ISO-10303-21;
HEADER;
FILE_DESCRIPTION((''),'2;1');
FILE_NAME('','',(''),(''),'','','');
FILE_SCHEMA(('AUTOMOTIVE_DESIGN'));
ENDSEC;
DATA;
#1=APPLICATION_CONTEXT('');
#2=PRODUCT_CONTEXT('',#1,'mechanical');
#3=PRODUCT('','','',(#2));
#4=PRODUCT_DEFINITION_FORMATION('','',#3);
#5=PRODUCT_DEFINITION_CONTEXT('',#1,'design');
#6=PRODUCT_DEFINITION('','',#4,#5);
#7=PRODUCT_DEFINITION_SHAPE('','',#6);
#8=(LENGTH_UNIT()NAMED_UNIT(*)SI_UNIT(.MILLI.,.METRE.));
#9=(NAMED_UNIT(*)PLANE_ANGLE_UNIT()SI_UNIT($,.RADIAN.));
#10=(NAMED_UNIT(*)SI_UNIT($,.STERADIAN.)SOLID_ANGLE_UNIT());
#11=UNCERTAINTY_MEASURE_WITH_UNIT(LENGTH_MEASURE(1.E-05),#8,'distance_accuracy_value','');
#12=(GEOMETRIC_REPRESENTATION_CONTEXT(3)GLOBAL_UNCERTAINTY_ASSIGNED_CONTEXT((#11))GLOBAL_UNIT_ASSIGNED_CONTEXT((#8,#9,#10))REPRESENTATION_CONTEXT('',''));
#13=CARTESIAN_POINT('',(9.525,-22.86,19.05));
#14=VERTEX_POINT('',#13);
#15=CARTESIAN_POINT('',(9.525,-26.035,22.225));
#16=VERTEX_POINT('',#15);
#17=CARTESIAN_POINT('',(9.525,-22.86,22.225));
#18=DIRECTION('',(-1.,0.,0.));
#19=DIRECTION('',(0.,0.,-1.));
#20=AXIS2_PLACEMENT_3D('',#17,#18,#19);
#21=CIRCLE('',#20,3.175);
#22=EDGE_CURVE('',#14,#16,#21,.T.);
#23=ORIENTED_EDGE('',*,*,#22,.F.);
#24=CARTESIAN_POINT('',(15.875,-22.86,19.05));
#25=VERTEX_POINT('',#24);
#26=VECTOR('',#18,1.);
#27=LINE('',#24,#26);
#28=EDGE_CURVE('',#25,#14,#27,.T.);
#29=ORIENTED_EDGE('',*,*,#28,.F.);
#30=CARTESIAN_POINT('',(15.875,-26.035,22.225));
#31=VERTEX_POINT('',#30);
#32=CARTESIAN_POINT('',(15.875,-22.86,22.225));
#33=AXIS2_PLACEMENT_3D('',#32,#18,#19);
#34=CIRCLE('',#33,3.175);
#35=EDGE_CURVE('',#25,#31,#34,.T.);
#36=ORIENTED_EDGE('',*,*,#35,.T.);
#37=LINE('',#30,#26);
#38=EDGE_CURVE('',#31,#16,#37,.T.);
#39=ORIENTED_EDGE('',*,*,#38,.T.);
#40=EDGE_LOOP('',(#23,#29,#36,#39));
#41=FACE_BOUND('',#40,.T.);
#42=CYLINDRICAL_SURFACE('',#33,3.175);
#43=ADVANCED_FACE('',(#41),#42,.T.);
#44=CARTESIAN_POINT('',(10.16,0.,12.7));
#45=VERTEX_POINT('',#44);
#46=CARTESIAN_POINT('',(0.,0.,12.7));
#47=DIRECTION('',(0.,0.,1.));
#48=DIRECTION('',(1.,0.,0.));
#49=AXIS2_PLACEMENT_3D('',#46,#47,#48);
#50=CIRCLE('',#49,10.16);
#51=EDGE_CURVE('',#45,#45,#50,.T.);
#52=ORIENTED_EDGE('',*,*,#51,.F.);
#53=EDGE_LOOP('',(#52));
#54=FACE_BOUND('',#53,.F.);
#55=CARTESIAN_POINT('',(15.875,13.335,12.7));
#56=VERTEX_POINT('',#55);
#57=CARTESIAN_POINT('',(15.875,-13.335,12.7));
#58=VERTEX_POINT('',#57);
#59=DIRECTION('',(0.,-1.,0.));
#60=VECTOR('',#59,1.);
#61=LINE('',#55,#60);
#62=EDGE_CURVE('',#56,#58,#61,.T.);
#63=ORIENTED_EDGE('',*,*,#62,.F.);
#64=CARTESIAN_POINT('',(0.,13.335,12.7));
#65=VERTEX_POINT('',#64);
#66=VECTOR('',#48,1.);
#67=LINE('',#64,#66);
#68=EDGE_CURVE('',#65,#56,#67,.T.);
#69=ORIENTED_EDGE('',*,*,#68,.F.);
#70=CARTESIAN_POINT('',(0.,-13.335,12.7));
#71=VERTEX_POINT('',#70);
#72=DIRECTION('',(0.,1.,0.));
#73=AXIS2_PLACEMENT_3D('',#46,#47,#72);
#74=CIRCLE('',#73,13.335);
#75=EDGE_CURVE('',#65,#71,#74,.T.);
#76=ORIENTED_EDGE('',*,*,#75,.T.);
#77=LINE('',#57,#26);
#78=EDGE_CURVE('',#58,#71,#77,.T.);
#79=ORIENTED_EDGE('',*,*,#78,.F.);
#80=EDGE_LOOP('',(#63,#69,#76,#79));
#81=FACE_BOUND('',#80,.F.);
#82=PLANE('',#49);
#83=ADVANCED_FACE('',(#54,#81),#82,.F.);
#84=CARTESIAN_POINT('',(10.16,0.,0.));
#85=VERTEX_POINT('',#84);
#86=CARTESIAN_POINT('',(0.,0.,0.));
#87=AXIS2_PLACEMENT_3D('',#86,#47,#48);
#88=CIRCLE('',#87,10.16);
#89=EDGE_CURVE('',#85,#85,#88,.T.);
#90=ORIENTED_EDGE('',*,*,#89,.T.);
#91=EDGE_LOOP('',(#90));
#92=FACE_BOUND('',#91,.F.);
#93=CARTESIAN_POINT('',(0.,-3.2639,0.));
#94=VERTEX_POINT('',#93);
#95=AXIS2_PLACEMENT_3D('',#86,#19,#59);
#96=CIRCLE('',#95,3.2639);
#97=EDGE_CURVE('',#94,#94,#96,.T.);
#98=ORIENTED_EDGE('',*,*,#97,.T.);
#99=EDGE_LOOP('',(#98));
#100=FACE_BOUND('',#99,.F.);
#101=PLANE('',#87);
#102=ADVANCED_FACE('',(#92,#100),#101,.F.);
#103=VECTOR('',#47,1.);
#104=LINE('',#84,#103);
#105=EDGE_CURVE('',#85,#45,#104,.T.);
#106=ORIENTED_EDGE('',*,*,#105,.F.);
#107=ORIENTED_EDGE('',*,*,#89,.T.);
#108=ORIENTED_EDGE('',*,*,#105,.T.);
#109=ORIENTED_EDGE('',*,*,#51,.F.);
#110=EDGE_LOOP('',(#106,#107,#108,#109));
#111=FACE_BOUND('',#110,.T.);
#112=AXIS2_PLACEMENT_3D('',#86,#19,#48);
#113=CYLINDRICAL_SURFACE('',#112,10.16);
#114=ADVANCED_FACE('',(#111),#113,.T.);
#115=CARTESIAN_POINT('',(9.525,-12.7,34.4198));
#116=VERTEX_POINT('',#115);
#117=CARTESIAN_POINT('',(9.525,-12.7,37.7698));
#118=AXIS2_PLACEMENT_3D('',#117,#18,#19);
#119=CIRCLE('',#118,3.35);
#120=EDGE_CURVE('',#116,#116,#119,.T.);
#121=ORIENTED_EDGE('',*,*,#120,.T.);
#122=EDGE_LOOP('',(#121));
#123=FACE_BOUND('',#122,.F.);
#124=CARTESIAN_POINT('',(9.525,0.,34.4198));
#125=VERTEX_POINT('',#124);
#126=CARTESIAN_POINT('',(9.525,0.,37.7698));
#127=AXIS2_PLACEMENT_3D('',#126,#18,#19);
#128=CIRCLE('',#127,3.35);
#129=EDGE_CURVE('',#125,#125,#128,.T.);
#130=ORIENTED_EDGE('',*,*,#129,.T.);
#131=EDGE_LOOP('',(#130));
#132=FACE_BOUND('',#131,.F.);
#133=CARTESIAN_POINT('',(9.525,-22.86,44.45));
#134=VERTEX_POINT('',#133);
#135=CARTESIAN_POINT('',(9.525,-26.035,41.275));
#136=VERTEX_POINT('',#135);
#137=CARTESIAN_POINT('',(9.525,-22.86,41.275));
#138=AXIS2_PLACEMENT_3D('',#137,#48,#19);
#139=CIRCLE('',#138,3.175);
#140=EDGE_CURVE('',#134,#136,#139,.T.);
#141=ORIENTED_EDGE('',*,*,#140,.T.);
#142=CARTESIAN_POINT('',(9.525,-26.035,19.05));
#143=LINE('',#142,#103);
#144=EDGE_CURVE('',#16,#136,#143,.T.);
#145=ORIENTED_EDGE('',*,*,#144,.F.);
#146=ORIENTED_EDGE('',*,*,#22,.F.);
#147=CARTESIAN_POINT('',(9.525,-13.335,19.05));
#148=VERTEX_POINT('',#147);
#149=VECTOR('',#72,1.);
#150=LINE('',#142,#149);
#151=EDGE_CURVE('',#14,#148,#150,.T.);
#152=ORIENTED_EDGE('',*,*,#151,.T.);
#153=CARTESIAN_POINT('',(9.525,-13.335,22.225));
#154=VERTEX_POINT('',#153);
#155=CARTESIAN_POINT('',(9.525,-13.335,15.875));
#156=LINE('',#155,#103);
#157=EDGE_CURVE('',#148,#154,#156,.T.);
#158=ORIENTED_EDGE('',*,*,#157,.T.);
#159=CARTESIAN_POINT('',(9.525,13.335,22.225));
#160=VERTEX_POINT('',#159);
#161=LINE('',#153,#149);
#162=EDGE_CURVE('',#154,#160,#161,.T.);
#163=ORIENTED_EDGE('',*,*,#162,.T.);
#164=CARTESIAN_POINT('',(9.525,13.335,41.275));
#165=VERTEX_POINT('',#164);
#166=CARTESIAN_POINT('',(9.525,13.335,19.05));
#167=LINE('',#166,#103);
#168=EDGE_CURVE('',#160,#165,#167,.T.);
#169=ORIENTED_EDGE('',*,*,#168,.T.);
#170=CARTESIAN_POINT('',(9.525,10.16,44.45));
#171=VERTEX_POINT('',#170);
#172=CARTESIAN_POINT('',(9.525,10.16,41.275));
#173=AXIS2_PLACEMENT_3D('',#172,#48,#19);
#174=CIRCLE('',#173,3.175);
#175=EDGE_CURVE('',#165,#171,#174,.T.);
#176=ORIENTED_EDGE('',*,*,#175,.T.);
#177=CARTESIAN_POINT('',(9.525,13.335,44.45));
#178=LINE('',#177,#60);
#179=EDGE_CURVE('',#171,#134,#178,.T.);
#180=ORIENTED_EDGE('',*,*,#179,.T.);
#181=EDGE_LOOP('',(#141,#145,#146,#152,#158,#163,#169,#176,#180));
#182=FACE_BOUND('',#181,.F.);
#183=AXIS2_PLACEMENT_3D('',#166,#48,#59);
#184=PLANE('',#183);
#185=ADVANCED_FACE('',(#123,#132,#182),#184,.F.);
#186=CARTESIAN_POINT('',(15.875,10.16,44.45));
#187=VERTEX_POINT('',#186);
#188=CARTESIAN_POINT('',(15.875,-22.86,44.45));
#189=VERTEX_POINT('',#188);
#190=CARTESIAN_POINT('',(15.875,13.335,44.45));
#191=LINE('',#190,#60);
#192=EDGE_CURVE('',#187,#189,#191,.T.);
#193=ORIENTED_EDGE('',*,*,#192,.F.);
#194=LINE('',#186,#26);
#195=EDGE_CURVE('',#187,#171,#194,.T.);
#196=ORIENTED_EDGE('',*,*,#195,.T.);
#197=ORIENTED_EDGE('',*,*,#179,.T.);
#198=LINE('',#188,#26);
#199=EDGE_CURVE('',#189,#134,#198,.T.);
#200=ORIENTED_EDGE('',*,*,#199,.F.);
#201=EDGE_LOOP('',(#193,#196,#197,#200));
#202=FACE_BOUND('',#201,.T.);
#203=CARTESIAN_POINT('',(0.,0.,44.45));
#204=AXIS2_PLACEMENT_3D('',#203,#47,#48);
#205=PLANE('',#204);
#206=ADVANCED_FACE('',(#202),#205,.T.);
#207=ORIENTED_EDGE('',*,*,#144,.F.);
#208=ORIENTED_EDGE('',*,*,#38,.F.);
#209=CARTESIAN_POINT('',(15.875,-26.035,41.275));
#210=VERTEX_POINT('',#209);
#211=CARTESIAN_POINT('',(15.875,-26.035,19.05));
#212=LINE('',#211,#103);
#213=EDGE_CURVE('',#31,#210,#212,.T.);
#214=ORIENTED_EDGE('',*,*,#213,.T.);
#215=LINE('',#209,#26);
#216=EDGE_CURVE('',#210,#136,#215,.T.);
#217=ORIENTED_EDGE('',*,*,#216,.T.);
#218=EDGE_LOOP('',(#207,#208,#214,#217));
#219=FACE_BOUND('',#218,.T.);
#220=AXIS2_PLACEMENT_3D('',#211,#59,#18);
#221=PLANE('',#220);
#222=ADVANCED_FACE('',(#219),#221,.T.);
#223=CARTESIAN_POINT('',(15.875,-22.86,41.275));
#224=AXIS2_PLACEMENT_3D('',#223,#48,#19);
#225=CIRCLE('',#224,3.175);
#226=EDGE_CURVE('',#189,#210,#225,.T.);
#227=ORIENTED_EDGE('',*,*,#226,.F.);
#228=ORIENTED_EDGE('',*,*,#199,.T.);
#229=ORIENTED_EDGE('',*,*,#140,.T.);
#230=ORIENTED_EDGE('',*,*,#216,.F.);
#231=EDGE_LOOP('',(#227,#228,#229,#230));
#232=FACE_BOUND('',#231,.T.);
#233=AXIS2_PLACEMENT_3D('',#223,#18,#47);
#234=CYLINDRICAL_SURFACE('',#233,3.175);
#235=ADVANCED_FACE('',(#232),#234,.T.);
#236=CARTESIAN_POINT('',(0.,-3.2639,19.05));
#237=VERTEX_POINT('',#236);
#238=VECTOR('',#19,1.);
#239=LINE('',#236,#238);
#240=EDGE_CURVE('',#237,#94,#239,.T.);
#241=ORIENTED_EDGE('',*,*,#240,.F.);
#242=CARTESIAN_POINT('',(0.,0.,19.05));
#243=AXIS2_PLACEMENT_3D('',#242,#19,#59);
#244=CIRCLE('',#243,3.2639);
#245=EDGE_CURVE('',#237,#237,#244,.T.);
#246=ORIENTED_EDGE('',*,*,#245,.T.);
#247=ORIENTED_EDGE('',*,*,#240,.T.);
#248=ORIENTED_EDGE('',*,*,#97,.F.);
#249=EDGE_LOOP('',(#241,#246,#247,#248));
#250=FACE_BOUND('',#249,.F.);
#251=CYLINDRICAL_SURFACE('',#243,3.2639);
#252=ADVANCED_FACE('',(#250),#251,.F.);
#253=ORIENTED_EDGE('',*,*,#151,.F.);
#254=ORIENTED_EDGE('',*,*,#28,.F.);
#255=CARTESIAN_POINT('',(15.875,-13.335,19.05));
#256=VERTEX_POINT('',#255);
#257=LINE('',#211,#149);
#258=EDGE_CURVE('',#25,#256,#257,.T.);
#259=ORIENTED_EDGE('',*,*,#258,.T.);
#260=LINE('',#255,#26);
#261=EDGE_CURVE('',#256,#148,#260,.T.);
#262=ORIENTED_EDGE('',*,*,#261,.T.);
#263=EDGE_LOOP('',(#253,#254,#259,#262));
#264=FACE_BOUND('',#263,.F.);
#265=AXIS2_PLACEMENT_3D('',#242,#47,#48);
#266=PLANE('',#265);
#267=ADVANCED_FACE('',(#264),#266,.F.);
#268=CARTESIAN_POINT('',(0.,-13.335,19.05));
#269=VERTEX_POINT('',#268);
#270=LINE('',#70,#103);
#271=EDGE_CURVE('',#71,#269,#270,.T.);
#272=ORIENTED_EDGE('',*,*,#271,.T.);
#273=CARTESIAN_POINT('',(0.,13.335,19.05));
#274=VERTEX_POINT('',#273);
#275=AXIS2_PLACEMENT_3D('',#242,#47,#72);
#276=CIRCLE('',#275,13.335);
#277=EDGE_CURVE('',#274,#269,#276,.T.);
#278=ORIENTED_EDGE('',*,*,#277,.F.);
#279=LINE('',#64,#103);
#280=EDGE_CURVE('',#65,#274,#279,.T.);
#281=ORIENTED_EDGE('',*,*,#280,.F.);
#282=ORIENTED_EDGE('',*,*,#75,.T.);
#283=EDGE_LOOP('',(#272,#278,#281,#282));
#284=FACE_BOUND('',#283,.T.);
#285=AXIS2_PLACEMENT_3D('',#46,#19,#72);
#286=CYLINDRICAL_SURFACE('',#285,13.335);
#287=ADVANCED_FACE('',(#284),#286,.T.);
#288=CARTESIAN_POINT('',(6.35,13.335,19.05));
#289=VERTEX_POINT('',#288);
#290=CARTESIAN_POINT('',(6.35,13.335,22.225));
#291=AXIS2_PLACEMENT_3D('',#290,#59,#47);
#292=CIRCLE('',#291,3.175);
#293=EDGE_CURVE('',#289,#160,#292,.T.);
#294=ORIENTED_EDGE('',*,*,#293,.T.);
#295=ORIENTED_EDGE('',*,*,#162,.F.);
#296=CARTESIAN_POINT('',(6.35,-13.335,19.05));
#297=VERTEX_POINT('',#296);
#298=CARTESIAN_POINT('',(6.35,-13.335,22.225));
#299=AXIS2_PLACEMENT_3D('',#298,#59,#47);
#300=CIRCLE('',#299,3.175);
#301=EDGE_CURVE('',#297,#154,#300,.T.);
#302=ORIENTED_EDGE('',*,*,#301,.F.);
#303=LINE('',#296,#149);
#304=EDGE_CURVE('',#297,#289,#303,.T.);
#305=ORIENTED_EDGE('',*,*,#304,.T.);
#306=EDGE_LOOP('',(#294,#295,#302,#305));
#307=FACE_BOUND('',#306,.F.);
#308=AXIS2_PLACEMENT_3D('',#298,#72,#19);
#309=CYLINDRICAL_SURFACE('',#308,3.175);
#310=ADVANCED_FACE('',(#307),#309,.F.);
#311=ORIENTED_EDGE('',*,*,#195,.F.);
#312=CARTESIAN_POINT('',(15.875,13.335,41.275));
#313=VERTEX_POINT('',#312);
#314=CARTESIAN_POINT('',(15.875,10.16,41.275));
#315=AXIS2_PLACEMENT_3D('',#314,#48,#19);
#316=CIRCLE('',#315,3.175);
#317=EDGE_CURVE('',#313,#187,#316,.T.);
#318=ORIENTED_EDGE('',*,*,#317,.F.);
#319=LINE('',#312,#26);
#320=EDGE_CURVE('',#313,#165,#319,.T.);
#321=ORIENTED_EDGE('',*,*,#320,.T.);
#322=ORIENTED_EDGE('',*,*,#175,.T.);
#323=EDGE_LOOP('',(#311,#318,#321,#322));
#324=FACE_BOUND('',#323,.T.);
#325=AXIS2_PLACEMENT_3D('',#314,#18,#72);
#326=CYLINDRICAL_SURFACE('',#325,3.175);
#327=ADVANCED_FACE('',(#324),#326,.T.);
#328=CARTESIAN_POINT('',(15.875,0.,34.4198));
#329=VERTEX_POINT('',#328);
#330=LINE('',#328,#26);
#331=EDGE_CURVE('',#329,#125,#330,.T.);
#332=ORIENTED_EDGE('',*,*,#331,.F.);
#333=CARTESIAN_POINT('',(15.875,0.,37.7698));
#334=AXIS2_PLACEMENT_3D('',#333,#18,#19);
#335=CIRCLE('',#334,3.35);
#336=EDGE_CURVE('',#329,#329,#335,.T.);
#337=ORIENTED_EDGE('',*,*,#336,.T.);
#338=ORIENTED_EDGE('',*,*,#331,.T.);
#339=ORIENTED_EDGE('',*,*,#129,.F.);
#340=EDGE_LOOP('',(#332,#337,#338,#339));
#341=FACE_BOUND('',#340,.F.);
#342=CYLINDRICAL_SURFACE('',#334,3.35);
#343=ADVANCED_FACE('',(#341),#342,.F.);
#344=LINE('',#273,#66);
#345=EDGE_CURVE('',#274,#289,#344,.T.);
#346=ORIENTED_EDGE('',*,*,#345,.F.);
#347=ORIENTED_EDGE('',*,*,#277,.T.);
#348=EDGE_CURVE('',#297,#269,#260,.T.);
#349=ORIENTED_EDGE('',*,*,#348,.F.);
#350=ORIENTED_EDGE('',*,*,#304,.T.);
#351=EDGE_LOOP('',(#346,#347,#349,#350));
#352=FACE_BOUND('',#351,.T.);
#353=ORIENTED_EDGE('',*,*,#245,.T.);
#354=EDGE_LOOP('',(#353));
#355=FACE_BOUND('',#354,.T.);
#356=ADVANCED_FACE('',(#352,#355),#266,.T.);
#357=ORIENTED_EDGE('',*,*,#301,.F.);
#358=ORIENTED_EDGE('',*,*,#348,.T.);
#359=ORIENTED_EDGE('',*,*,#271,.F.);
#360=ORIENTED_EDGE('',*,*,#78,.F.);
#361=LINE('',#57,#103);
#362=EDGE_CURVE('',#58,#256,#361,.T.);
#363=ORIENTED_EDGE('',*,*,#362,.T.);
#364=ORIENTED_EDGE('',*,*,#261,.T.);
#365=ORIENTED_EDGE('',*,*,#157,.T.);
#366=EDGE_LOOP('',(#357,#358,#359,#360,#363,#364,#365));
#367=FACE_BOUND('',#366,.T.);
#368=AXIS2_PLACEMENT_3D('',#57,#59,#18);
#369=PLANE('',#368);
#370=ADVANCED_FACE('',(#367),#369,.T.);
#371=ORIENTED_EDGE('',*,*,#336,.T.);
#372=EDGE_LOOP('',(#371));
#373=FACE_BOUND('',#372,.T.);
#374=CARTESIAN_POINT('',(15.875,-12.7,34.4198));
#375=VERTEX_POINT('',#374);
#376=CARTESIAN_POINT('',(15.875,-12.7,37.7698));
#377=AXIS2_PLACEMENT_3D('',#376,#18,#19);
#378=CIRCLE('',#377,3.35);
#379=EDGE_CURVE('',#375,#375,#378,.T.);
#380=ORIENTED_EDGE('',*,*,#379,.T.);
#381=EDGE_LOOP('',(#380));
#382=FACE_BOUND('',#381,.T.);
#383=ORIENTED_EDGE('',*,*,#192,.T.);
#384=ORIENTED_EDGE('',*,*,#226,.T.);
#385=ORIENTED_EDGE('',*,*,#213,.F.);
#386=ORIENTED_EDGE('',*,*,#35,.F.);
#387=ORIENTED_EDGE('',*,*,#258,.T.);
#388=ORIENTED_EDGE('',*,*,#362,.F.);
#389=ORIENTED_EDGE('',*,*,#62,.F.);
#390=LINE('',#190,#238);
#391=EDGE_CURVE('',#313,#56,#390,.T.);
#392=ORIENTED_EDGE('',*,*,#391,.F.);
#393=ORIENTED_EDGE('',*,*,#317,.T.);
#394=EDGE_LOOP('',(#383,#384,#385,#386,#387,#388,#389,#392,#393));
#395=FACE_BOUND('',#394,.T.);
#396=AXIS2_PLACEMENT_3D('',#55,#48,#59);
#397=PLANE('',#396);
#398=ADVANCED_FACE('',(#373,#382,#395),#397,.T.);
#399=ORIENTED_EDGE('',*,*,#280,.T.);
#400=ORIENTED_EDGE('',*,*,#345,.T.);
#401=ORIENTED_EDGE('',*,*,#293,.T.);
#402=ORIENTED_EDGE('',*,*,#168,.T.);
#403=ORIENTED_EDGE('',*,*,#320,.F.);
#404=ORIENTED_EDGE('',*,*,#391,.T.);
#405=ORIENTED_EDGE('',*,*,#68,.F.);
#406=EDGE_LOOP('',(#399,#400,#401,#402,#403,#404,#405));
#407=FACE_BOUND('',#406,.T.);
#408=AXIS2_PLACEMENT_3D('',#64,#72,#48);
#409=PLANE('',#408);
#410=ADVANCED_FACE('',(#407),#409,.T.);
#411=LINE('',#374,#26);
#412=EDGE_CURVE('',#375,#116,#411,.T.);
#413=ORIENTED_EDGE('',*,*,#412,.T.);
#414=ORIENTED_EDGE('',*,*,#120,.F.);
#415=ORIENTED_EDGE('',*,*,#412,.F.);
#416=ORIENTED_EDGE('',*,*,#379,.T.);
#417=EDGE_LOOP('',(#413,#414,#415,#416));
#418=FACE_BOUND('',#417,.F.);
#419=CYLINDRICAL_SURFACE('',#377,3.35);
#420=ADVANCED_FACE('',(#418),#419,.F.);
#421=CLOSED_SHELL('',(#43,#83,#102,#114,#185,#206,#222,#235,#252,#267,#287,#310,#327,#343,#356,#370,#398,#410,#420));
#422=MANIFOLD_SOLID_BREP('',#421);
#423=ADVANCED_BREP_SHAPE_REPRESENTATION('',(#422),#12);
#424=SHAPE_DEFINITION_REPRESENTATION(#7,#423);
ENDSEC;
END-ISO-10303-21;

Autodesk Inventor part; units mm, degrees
ref_plane "YZ Plane" through (0, 0, 0) normal (1, 0, 0) x (0, 1, 0)
ref_plane "XZ Plane" through (0, 0, 0) normal (0, 1, 0) x (-1, 0, 0)
ref_plane "XY Plane" through (0, 0, 0) normal (0, 0, 1) x (1, 0, 0)
sketch "Sketch1" plane through (0, 0, 0) normal (0, 0, 1) x (1, 0, 0)
  circle A0 centre (0, 0) radius 10.16
  circle A1 centre (0, 0) radius 8.7376
  dimension "d0" = 20.32
  dimension "d6" = 17.4752
extrude "Extrusion1" add sketch "Sketch1" along normal blind 12.7 contours A0 | A1
sketch "Sketch2" plane through (0, 0, 12.7) normal (0, 0, 1) x (1, 0, 0)
  circle A0 centre (0, 0) radius 10.16 projected
  circle A1 centre (0, 0) radius 13.335 construction
  line L0 (0, 13.335) -> (15.875, 13.335)
  line L1 (15.875, 13.335) -> (15.875, -13.335)
  line L2 (15.875, -13.335) -> (0, -13.335)
  arc A2 (0, 13.335) -> (0, -13.335) centre (0, 0) ccw
  point P0 (15.875, 0)
  dimension "d3" = 3.175
  dimension "d14" = 15.875
extrude "Extrusion2" add sketch "Sketch2" along normal blind 6.35 contours A0 | L0 L1 L2 A2
sketch "Sketch4" plane through (0, 0, 19.05) normal (0, 0, 1) x (1, 0, 0)
  arc A0 (0, 13.335) -> (0, -13.335) centre (0, 0) ccw projected
hole "Hole2" at (0, 0, 19.05) direction (0, 0, -1) diameter 6.5278 end through all clearance for "Flat Head Machine Screw (82)" size "1/4" standard "Ansi Unified Screw Threads"
sketch "Sketch5" plane through (0, 0, 19.05) normal (0, 0, 1) x (1, 0, 0)
  line L0 (15.875, 13.335) -> (0, 13.335) projected
  line L1 (0, -13.335) -> (15.875, -13.335) projected
  line L2 (15.875, 13.335) -> (9.525, 13.335)
  line L3 (9.525, 13.335) -> (9.525, -13.335)
  line L4 (9.525, -13.335) -> (15.875, -13.335)
  line L5 (15.875, -13.335) -> (15.875, 13.335)
  line L6 (9.525, -13.335) -> (15.875, -13.335)
  line L7 (15.875, -13.335) -> (15.875, -26.035)
  line L8 (15.875, -26.035) -> (9.525, -26.035)
  line L9 (9.525, -26.035) -> (9.525, -13.335)
  point P0 (0, 0)
  point P1 (15.875, -19.685)
  point P2 (15.875, 0)
  dimension "d22" = 6.35
  dimension "d36" = 12.7
extrude "Extrusion3" add sketch "Sketch5" along normal blind 25.4
fillet "Fillet1" radius 3.175 4 edges at (9.525, 0, 19.05) (12.7, -26.035, 19.05) (12.7, -26.035, 44.45) (12.7, 13.335, 44.45)
sketch "Sketch6" plane through (15.875, -13.335, 12.7) normal (1, 0, 0) x (0, 0, -1)
  line L0 (-25.0698, 13.335) -> (-25.0698, 0.635) construction
  line L1 (0, 26.67) -> (-28.575, 26.67) construction
  line L2 (-31.75, -9.525) -> (-31.75, 23.495) projected
  point P0 (12.7, 13.335)
  point P1 (-25.0698, 6.985)
  dimension "d26" = 12.7
  dimension "d35" = 13.335
  dimension "d37" = 6.6802
hole "Hole3" at (15.875, 0, 37.7698) at (15.875, -12.7, 37.7698) direction (-1, 0, 0) diameter 6.7 end through all
properties part number "EL2-020" material "ABS Plastic"
